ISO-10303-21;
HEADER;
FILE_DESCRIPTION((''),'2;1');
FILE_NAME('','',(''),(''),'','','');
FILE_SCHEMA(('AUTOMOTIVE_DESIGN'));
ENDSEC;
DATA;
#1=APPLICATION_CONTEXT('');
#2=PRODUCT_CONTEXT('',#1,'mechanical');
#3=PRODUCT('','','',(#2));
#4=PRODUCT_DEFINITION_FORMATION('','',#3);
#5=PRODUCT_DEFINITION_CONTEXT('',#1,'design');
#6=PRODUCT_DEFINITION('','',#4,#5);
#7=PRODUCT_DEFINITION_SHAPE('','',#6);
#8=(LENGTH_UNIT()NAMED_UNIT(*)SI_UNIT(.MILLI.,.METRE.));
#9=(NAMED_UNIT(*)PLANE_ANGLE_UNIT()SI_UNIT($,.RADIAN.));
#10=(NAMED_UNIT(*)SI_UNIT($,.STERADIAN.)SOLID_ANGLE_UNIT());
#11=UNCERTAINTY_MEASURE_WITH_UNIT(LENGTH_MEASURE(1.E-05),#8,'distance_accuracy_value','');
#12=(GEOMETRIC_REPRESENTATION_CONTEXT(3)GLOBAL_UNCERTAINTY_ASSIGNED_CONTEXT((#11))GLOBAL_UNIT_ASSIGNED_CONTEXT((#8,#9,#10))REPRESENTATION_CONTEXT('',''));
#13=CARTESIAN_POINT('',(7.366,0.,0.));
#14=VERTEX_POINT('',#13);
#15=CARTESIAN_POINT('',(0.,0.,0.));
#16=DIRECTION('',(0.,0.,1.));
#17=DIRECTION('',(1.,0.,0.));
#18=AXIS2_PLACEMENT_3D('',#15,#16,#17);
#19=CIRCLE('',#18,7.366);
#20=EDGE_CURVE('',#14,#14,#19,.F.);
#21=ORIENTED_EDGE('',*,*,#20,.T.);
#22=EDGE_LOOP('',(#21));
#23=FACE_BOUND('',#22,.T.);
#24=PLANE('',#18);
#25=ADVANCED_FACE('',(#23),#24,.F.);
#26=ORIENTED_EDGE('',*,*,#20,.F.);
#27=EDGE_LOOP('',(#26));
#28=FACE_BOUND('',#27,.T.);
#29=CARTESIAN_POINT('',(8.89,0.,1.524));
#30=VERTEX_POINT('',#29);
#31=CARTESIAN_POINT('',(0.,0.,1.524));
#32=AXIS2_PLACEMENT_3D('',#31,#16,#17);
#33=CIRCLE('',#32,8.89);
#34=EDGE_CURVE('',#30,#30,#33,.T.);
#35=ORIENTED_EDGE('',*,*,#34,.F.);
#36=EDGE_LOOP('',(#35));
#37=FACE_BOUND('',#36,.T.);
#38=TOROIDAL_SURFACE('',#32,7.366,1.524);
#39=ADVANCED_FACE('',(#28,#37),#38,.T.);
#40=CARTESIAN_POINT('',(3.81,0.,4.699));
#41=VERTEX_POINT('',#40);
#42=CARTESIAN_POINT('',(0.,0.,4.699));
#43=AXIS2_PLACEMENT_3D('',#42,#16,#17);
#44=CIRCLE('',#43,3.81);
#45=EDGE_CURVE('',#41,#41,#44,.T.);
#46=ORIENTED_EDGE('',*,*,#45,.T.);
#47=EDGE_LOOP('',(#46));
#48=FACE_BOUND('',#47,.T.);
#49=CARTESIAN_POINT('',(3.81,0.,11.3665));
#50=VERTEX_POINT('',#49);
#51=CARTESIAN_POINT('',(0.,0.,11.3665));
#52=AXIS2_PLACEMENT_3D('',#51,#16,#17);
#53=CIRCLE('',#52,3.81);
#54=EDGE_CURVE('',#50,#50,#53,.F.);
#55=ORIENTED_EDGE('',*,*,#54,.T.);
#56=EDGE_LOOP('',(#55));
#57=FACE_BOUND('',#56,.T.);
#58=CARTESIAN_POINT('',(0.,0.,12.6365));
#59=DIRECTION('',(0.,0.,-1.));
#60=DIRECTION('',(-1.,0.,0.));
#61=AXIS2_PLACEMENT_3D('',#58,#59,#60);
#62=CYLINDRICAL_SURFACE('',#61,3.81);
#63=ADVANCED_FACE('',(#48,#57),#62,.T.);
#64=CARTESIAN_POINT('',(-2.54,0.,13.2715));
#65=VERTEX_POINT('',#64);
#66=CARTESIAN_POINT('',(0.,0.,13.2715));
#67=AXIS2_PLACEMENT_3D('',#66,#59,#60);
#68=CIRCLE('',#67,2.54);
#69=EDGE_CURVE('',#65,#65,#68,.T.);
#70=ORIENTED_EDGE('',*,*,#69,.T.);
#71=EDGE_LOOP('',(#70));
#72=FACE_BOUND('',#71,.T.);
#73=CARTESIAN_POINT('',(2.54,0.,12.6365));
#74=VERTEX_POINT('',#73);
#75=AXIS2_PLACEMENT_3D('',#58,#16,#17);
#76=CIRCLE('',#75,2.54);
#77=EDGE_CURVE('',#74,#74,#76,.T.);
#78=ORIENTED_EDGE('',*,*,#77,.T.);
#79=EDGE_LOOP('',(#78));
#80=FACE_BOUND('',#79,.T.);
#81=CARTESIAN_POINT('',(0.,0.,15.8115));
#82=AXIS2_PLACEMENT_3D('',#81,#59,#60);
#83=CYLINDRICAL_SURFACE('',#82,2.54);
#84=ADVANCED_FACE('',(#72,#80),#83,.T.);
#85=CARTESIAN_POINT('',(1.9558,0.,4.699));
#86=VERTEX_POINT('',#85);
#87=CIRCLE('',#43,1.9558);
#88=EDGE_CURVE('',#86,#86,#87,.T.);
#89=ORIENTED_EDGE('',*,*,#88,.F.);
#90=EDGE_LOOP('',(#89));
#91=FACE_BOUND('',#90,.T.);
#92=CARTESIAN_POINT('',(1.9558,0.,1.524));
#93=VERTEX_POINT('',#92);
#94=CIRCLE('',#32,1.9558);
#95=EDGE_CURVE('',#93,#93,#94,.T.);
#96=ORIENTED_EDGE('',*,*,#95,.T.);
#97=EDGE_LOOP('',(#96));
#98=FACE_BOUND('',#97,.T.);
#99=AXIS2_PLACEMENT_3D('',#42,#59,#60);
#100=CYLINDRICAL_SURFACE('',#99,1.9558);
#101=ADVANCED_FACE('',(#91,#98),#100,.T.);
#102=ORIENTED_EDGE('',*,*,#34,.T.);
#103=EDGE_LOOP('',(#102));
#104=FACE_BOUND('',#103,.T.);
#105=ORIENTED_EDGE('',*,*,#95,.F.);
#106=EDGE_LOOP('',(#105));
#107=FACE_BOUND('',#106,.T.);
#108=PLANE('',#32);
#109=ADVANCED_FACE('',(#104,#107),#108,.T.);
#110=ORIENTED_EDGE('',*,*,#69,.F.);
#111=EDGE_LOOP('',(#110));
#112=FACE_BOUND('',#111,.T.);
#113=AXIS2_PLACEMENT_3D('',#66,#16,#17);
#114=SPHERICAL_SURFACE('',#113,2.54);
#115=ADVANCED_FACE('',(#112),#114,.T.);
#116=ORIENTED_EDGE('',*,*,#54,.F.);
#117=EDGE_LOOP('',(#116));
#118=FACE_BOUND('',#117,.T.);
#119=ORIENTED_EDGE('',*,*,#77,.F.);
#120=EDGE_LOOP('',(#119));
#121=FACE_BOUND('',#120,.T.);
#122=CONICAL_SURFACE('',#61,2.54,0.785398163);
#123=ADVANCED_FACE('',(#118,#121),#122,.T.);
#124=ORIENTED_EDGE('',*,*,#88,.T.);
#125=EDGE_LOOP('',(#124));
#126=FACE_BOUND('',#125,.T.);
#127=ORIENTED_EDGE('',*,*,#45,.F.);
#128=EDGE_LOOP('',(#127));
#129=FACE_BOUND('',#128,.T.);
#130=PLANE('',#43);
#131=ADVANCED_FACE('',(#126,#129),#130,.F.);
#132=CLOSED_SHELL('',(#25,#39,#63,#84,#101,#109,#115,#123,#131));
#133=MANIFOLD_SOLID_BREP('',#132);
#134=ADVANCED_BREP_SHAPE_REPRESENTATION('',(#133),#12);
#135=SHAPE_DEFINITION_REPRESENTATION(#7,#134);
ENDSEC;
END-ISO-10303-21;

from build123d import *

# Parameters (mm, degrees)
SKETCH1_R      = 8.89
EXTRUDE1_DEPTH = 1.524
SKETCH2_R      = 1.9558
EXTRUDE2_DEPTH = 3.175
SKETCH3_R      = 3.81
EXTRUDE3_DEPTH = 7.9375
SKETCH4_R      = 2.54
EXTRUDE4_DEPTH = 3.175
FILLET1_R      = 2.54
CHAMFER4_SIZE  = 1.27
FILLET2_R      = 1.524


with BuildPart() as part:
    # Sketch1 → Extrude1 (new body)
    with BuildSketch(Plane.XY):
        Circle(SKETCH1_R)
    extrude(amount=EXTRUDE1_DEPTH)

    # Sketch2 → Extrude2 (add)
    with BuildSketch(Plane.XY.offset(1.524)):
        Circle(SKETCH2_R)
    extrude(amount=EXTRUDE2_DEPTH)

    # Sketch3 → Extrude3 (add)
    with BuildSketch(Plane.XY.offset(4.699)):
        Circle(SKETCH3_R)
    extrude(amount=EXTRUDE3_DEPTH)

    # Sketch4 → Extrude4 (add)
    with BuildSketch(Plane.XY.offset(12.6365)):
        with Locations(Location((0, 0, 0), (0, 0, 180))):
            Circle(SKETCH4_R)
    extrude(amount=EXTRUDE4_DEPTH)

    # Fillet1
    fillet1_edges = [part.edges().sort_by_distance(p)[0] for p in [
        (2.54, 0, 15.8115),
    ]]
    fillet(fillet1_edges, radius=FILLET1_R)

    # Chamfer4
    chamfer4_edges = [part.edges().sort_by_distance(p)[0] for p in [
        (-3.81, 0, 12.6365),
    ]]
    chamfer(chamfer4_edges, length=CHAMFER4_SIZE - 0.0001)  # a hair under: the kernel refuses the full size

    # Fillet2
    fillet2_edges = [part.edges().sort_by_distance(p)[0] for p in [
        (-8.89, 0, 0),
    ]]
    fillet(fillet2_edges, radius=FILLET2_R - 0.0001)  # a hair under: the kernel refuses the full size


solid = part.part
